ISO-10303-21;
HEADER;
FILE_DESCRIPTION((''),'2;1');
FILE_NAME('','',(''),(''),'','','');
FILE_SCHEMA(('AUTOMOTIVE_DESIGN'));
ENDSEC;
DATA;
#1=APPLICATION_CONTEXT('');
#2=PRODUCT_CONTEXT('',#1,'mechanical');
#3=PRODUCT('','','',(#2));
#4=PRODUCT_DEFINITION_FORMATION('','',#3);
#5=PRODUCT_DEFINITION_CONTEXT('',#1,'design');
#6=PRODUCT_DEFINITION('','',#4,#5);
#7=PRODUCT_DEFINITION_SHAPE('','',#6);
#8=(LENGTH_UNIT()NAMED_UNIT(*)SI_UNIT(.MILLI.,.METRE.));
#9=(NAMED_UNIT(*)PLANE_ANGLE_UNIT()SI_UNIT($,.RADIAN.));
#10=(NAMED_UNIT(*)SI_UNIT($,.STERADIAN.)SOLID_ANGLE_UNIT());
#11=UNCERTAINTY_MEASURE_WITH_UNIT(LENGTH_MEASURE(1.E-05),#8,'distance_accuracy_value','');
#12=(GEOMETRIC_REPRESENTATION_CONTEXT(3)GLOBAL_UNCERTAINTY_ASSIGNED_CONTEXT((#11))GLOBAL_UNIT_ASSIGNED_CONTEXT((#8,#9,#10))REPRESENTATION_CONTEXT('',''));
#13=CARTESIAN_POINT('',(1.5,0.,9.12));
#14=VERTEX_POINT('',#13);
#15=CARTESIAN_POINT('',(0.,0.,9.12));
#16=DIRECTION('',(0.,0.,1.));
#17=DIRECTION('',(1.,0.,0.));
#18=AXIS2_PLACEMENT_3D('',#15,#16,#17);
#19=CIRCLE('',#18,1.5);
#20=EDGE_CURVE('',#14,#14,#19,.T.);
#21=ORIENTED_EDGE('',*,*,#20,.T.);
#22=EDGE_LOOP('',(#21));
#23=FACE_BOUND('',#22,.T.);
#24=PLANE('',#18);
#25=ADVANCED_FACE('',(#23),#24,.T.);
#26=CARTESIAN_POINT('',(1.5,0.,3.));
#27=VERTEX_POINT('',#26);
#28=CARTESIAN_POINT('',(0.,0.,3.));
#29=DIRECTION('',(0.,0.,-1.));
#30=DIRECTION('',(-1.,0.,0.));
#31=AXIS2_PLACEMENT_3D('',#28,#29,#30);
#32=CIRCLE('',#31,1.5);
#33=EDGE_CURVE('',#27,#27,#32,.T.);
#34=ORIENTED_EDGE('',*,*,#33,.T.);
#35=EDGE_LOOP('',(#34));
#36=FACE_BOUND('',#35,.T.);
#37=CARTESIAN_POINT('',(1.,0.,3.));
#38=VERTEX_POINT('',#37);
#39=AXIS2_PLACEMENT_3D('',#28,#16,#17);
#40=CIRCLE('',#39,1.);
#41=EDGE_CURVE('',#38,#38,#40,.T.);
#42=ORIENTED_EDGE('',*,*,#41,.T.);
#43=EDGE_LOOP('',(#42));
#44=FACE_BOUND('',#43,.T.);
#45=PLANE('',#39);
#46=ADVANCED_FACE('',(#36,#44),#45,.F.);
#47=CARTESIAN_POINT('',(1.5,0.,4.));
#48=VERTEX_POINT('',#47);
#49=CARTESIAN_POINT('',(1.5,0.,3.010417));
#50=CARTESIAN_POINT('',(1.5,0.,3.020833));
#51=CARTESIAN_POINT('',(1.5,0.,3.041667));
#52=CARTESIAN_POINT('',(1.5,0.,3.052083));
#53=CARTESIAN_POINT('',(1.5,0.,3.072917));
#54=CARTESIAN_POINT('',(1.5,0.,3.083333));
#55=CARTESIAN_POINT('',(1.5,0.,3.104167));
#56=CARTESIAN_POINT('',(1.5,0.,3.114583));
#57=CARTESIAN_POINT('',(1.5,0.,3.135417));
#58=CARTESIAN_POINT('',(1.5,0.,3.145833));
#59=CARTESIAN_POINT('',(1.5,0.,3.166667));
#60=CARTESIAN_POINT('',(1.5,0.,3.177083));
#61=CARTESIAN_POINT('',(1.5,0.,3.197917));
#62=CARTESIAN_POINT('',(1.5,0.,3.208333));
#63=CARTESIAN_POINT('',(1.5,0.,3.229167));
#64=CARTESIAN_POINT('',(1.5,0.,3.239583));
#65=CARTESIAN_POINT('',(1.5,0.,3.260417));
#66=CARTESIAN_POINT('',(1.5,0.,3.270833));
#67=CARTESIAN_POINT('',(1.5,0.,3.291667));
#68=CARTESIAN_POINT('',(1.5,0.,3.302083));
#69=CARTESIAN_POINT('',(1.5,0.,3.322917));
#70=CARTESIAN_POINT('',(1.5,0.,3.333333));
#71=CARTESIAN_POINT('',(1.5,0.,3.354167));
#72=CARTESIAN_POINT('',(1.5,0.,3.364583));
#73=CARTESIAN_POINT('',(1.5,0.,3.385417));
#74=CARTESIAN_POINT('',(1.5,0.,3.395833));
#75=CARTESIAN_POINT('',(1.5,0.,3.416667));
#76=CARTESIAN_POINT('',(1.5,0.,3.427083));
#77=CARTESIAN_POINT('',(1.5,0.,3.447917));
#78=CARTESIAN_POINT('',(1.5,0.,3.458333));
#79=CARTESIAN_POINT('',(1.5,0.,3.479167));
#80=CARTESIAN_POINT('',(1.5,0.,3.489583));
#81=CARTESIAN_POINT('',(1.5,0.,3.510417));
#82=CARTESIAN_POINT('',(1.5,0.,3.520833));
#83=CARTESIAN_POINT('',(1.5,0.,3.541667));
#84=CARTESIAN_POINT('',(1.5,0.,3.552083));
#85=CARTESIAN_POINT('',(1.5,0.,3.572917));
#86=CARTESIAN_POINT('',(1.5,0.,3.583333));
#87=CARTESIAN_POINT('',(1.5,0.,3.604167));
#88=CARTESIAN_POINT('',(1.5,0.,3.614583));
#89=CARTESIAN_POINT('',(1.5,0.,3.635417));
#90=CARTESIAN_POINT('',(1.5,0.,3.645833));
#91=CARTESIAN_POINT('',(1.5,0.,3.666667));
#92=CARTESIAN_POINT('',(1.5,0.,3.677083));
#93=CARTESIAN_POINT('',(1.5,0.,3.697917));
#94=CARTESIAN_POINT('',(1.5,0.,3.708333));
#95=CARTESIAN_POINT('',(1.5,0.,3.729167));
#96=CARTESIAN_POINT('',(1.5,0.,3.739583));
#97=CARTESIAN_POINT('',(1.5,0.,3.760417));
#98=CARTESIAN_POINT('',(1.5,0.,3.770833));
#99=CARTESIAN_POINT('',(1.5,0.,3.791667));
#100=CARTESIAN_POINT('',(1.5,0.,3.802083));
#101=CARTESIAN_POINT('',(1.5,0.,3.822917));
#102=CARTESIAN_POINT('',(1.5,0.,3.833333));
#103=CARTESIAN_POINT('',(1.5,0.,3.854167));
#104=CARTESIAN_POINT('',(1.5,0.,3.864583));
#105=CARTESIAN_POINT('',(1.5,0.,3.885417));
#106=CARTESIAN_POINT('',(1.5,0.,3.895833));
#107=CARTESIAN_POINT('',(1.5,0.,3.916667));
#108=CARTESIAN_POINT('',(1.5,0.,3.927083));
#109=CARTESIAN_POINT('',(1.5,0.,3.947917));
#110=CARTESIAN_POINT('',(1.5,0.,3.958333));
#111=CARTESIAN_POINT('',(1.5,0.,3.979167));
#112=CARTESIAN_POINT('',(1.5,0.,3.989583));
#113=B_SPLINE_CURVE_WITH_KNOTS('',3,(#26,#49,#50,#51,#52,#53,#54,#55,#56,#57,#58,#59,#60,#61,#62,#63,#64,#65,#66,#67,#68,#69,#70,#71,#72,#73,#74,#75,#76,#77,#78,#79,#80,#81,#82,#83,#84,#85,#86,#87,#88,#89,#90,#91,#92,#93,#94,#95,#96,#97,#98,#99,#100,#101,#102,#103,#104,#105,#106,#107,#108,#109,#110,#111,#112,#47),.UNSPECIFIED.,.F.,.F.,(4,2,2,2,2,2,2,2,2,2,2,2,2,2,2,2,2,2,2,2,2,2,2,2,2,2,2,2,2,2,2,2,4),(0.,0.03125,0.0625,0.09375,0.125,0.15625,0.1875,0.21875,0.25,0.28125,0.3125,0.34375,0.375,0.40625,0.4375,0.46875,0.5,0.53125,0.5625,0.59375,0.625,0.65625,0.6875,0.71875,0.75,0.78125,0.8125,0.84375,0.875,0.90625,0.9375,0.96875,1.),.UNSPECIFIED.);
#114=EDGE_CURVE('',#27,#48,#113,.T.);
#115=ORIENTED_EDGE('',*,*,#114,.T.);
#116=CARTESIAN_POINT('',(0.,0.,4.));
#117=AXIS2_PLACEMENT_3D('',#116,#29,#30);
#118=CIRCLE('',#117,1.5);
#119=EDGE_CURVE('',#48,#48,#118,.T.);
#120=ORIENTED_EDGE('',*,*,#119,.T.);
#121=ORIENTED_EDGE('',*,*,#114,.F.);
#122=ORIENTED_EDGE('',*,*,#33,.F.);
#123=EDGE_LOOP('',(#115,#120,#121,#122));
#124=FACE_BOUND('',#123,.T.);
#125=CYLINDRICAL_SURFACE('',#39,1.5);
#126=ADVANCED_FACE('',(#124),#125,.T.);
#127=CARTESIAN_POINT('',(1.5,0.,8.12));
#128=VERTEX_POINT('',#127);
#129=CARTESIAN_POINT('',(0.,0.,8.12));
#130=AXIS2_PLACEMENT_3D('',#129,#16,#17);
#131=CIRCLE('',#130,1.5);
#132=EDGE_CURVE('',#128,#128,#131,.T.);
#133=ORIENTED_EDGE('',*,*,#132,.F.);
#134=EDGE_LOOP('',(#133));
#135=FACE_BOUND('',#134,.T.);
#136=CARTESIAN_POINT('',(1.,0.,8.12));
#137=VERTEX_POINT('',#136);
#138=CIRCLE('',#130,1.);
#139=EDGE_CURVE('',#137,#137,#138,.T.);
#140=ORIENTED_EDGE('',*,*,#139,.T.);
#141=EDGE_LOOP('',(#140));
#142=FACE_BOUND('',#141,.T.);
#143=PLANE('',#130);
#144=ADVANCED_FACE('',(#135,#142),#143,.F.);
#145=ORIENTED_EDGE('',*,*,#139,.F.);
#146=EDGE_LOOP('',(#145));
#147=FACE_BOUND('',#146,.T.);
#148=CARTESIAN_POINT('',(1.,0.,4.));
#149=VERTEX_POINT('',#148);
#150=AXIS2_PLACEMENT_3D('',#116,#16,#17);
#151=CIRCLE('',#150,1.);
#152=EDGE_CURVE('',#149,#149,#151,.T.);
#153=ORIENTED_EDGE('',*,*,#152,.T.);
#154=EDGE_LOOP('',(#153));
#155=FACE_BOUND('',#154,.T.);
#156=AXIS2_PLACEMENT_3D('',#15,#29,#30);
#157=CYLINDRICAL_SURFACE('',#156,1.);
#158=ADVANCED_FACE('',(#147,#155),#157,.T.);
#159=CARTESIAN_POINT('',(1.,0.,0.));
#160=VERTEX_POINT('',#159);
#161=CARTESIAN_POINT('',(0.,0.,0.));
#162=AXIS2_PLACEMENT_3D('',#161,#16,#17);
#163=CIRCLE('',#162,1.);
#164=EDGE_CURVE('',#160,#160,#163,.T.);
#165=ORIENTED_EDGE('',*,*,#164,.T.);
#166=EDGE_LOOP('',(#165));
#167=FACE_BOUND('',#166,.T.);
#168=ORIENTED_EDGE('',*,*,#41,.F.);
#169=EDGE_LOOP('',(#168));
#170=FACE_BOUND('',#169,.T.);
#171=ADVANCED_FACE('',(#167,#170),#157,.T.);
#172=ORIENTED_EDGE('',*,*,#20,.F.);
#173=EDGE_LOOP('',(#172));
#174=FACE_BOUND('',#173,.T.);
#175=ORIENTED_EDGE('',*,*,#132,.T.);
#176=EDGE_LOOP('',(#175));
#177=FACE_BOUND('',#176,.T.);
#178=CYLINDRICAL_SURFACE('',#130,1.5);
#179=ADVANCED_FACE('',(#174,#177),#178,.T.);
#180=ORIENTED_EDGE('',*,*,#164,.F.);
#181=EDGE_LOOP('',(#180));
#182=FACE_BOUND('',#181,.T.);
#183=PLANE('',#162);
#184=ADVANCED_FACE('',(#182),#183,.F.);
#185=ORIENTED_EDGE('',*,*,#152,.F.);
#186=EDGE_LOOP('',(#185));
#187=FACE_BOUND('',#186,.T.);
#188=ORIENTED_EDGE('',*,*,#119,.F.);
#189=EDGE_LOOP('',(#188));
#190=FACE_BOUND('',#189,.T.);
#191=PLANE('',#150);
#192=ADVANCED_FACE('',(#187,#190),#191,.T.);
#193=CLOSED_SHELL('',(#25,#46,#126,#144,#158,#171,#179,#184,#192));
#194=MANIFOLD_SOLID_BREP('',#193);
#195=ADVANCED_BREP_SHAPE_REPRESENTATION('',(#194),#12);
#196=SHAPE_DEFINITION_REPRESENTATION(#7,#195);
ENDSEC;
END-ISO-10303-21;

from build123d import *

# Parameters (mm, degrees)
SKETCH1_R               = 1
BOSS_EXTRUDE1_DEPTH     = 9.12
BOSS_EXTRUDE2_START     = 3
BOSS_EXTRUDE2_OUTLINE_R = 1.5
BOSS_EXTRUDE2_DEPTH     = 1
BOSS_EXTRUDE3_START     = -1
SKETCH2_R               = 1.5
BOSS_EXTRUDE3_DEPTH     = 1


# Read off the part's stored shape, not the designer's step: Boss-Extrude2
with BuildPart() as part:
    # Sketch1 → Boss-Extrude1 (new body)
    with BuildSketch(Plane.XY):
        Circle(SKETCH1_R)
    extrude(amount=BOSS_EXTRUDE1_DEPTH)

    # Boss-Extrude2 outline → Boss-Extrude2 (add)
    with BuildSketch(Plane.XY.offset(BOSS_EXTRUDE2_START)):
        Circle(BOSS_EXTRUDE2_OUTLINE_R)
    extrude(amount=BOSS_EXTRUDE2_DEPTH)

    # Sketch2 → Boss-Extrude3 (add)
    with BuildSketch(Plane.XY.offset(9.12).offset(BOSS_EXTRUDE3_START)):
        Circle(SKETCH2_R)
    extrude(amount=BOSS_EXTRUDE3_DEPTH)


solid = part.part
